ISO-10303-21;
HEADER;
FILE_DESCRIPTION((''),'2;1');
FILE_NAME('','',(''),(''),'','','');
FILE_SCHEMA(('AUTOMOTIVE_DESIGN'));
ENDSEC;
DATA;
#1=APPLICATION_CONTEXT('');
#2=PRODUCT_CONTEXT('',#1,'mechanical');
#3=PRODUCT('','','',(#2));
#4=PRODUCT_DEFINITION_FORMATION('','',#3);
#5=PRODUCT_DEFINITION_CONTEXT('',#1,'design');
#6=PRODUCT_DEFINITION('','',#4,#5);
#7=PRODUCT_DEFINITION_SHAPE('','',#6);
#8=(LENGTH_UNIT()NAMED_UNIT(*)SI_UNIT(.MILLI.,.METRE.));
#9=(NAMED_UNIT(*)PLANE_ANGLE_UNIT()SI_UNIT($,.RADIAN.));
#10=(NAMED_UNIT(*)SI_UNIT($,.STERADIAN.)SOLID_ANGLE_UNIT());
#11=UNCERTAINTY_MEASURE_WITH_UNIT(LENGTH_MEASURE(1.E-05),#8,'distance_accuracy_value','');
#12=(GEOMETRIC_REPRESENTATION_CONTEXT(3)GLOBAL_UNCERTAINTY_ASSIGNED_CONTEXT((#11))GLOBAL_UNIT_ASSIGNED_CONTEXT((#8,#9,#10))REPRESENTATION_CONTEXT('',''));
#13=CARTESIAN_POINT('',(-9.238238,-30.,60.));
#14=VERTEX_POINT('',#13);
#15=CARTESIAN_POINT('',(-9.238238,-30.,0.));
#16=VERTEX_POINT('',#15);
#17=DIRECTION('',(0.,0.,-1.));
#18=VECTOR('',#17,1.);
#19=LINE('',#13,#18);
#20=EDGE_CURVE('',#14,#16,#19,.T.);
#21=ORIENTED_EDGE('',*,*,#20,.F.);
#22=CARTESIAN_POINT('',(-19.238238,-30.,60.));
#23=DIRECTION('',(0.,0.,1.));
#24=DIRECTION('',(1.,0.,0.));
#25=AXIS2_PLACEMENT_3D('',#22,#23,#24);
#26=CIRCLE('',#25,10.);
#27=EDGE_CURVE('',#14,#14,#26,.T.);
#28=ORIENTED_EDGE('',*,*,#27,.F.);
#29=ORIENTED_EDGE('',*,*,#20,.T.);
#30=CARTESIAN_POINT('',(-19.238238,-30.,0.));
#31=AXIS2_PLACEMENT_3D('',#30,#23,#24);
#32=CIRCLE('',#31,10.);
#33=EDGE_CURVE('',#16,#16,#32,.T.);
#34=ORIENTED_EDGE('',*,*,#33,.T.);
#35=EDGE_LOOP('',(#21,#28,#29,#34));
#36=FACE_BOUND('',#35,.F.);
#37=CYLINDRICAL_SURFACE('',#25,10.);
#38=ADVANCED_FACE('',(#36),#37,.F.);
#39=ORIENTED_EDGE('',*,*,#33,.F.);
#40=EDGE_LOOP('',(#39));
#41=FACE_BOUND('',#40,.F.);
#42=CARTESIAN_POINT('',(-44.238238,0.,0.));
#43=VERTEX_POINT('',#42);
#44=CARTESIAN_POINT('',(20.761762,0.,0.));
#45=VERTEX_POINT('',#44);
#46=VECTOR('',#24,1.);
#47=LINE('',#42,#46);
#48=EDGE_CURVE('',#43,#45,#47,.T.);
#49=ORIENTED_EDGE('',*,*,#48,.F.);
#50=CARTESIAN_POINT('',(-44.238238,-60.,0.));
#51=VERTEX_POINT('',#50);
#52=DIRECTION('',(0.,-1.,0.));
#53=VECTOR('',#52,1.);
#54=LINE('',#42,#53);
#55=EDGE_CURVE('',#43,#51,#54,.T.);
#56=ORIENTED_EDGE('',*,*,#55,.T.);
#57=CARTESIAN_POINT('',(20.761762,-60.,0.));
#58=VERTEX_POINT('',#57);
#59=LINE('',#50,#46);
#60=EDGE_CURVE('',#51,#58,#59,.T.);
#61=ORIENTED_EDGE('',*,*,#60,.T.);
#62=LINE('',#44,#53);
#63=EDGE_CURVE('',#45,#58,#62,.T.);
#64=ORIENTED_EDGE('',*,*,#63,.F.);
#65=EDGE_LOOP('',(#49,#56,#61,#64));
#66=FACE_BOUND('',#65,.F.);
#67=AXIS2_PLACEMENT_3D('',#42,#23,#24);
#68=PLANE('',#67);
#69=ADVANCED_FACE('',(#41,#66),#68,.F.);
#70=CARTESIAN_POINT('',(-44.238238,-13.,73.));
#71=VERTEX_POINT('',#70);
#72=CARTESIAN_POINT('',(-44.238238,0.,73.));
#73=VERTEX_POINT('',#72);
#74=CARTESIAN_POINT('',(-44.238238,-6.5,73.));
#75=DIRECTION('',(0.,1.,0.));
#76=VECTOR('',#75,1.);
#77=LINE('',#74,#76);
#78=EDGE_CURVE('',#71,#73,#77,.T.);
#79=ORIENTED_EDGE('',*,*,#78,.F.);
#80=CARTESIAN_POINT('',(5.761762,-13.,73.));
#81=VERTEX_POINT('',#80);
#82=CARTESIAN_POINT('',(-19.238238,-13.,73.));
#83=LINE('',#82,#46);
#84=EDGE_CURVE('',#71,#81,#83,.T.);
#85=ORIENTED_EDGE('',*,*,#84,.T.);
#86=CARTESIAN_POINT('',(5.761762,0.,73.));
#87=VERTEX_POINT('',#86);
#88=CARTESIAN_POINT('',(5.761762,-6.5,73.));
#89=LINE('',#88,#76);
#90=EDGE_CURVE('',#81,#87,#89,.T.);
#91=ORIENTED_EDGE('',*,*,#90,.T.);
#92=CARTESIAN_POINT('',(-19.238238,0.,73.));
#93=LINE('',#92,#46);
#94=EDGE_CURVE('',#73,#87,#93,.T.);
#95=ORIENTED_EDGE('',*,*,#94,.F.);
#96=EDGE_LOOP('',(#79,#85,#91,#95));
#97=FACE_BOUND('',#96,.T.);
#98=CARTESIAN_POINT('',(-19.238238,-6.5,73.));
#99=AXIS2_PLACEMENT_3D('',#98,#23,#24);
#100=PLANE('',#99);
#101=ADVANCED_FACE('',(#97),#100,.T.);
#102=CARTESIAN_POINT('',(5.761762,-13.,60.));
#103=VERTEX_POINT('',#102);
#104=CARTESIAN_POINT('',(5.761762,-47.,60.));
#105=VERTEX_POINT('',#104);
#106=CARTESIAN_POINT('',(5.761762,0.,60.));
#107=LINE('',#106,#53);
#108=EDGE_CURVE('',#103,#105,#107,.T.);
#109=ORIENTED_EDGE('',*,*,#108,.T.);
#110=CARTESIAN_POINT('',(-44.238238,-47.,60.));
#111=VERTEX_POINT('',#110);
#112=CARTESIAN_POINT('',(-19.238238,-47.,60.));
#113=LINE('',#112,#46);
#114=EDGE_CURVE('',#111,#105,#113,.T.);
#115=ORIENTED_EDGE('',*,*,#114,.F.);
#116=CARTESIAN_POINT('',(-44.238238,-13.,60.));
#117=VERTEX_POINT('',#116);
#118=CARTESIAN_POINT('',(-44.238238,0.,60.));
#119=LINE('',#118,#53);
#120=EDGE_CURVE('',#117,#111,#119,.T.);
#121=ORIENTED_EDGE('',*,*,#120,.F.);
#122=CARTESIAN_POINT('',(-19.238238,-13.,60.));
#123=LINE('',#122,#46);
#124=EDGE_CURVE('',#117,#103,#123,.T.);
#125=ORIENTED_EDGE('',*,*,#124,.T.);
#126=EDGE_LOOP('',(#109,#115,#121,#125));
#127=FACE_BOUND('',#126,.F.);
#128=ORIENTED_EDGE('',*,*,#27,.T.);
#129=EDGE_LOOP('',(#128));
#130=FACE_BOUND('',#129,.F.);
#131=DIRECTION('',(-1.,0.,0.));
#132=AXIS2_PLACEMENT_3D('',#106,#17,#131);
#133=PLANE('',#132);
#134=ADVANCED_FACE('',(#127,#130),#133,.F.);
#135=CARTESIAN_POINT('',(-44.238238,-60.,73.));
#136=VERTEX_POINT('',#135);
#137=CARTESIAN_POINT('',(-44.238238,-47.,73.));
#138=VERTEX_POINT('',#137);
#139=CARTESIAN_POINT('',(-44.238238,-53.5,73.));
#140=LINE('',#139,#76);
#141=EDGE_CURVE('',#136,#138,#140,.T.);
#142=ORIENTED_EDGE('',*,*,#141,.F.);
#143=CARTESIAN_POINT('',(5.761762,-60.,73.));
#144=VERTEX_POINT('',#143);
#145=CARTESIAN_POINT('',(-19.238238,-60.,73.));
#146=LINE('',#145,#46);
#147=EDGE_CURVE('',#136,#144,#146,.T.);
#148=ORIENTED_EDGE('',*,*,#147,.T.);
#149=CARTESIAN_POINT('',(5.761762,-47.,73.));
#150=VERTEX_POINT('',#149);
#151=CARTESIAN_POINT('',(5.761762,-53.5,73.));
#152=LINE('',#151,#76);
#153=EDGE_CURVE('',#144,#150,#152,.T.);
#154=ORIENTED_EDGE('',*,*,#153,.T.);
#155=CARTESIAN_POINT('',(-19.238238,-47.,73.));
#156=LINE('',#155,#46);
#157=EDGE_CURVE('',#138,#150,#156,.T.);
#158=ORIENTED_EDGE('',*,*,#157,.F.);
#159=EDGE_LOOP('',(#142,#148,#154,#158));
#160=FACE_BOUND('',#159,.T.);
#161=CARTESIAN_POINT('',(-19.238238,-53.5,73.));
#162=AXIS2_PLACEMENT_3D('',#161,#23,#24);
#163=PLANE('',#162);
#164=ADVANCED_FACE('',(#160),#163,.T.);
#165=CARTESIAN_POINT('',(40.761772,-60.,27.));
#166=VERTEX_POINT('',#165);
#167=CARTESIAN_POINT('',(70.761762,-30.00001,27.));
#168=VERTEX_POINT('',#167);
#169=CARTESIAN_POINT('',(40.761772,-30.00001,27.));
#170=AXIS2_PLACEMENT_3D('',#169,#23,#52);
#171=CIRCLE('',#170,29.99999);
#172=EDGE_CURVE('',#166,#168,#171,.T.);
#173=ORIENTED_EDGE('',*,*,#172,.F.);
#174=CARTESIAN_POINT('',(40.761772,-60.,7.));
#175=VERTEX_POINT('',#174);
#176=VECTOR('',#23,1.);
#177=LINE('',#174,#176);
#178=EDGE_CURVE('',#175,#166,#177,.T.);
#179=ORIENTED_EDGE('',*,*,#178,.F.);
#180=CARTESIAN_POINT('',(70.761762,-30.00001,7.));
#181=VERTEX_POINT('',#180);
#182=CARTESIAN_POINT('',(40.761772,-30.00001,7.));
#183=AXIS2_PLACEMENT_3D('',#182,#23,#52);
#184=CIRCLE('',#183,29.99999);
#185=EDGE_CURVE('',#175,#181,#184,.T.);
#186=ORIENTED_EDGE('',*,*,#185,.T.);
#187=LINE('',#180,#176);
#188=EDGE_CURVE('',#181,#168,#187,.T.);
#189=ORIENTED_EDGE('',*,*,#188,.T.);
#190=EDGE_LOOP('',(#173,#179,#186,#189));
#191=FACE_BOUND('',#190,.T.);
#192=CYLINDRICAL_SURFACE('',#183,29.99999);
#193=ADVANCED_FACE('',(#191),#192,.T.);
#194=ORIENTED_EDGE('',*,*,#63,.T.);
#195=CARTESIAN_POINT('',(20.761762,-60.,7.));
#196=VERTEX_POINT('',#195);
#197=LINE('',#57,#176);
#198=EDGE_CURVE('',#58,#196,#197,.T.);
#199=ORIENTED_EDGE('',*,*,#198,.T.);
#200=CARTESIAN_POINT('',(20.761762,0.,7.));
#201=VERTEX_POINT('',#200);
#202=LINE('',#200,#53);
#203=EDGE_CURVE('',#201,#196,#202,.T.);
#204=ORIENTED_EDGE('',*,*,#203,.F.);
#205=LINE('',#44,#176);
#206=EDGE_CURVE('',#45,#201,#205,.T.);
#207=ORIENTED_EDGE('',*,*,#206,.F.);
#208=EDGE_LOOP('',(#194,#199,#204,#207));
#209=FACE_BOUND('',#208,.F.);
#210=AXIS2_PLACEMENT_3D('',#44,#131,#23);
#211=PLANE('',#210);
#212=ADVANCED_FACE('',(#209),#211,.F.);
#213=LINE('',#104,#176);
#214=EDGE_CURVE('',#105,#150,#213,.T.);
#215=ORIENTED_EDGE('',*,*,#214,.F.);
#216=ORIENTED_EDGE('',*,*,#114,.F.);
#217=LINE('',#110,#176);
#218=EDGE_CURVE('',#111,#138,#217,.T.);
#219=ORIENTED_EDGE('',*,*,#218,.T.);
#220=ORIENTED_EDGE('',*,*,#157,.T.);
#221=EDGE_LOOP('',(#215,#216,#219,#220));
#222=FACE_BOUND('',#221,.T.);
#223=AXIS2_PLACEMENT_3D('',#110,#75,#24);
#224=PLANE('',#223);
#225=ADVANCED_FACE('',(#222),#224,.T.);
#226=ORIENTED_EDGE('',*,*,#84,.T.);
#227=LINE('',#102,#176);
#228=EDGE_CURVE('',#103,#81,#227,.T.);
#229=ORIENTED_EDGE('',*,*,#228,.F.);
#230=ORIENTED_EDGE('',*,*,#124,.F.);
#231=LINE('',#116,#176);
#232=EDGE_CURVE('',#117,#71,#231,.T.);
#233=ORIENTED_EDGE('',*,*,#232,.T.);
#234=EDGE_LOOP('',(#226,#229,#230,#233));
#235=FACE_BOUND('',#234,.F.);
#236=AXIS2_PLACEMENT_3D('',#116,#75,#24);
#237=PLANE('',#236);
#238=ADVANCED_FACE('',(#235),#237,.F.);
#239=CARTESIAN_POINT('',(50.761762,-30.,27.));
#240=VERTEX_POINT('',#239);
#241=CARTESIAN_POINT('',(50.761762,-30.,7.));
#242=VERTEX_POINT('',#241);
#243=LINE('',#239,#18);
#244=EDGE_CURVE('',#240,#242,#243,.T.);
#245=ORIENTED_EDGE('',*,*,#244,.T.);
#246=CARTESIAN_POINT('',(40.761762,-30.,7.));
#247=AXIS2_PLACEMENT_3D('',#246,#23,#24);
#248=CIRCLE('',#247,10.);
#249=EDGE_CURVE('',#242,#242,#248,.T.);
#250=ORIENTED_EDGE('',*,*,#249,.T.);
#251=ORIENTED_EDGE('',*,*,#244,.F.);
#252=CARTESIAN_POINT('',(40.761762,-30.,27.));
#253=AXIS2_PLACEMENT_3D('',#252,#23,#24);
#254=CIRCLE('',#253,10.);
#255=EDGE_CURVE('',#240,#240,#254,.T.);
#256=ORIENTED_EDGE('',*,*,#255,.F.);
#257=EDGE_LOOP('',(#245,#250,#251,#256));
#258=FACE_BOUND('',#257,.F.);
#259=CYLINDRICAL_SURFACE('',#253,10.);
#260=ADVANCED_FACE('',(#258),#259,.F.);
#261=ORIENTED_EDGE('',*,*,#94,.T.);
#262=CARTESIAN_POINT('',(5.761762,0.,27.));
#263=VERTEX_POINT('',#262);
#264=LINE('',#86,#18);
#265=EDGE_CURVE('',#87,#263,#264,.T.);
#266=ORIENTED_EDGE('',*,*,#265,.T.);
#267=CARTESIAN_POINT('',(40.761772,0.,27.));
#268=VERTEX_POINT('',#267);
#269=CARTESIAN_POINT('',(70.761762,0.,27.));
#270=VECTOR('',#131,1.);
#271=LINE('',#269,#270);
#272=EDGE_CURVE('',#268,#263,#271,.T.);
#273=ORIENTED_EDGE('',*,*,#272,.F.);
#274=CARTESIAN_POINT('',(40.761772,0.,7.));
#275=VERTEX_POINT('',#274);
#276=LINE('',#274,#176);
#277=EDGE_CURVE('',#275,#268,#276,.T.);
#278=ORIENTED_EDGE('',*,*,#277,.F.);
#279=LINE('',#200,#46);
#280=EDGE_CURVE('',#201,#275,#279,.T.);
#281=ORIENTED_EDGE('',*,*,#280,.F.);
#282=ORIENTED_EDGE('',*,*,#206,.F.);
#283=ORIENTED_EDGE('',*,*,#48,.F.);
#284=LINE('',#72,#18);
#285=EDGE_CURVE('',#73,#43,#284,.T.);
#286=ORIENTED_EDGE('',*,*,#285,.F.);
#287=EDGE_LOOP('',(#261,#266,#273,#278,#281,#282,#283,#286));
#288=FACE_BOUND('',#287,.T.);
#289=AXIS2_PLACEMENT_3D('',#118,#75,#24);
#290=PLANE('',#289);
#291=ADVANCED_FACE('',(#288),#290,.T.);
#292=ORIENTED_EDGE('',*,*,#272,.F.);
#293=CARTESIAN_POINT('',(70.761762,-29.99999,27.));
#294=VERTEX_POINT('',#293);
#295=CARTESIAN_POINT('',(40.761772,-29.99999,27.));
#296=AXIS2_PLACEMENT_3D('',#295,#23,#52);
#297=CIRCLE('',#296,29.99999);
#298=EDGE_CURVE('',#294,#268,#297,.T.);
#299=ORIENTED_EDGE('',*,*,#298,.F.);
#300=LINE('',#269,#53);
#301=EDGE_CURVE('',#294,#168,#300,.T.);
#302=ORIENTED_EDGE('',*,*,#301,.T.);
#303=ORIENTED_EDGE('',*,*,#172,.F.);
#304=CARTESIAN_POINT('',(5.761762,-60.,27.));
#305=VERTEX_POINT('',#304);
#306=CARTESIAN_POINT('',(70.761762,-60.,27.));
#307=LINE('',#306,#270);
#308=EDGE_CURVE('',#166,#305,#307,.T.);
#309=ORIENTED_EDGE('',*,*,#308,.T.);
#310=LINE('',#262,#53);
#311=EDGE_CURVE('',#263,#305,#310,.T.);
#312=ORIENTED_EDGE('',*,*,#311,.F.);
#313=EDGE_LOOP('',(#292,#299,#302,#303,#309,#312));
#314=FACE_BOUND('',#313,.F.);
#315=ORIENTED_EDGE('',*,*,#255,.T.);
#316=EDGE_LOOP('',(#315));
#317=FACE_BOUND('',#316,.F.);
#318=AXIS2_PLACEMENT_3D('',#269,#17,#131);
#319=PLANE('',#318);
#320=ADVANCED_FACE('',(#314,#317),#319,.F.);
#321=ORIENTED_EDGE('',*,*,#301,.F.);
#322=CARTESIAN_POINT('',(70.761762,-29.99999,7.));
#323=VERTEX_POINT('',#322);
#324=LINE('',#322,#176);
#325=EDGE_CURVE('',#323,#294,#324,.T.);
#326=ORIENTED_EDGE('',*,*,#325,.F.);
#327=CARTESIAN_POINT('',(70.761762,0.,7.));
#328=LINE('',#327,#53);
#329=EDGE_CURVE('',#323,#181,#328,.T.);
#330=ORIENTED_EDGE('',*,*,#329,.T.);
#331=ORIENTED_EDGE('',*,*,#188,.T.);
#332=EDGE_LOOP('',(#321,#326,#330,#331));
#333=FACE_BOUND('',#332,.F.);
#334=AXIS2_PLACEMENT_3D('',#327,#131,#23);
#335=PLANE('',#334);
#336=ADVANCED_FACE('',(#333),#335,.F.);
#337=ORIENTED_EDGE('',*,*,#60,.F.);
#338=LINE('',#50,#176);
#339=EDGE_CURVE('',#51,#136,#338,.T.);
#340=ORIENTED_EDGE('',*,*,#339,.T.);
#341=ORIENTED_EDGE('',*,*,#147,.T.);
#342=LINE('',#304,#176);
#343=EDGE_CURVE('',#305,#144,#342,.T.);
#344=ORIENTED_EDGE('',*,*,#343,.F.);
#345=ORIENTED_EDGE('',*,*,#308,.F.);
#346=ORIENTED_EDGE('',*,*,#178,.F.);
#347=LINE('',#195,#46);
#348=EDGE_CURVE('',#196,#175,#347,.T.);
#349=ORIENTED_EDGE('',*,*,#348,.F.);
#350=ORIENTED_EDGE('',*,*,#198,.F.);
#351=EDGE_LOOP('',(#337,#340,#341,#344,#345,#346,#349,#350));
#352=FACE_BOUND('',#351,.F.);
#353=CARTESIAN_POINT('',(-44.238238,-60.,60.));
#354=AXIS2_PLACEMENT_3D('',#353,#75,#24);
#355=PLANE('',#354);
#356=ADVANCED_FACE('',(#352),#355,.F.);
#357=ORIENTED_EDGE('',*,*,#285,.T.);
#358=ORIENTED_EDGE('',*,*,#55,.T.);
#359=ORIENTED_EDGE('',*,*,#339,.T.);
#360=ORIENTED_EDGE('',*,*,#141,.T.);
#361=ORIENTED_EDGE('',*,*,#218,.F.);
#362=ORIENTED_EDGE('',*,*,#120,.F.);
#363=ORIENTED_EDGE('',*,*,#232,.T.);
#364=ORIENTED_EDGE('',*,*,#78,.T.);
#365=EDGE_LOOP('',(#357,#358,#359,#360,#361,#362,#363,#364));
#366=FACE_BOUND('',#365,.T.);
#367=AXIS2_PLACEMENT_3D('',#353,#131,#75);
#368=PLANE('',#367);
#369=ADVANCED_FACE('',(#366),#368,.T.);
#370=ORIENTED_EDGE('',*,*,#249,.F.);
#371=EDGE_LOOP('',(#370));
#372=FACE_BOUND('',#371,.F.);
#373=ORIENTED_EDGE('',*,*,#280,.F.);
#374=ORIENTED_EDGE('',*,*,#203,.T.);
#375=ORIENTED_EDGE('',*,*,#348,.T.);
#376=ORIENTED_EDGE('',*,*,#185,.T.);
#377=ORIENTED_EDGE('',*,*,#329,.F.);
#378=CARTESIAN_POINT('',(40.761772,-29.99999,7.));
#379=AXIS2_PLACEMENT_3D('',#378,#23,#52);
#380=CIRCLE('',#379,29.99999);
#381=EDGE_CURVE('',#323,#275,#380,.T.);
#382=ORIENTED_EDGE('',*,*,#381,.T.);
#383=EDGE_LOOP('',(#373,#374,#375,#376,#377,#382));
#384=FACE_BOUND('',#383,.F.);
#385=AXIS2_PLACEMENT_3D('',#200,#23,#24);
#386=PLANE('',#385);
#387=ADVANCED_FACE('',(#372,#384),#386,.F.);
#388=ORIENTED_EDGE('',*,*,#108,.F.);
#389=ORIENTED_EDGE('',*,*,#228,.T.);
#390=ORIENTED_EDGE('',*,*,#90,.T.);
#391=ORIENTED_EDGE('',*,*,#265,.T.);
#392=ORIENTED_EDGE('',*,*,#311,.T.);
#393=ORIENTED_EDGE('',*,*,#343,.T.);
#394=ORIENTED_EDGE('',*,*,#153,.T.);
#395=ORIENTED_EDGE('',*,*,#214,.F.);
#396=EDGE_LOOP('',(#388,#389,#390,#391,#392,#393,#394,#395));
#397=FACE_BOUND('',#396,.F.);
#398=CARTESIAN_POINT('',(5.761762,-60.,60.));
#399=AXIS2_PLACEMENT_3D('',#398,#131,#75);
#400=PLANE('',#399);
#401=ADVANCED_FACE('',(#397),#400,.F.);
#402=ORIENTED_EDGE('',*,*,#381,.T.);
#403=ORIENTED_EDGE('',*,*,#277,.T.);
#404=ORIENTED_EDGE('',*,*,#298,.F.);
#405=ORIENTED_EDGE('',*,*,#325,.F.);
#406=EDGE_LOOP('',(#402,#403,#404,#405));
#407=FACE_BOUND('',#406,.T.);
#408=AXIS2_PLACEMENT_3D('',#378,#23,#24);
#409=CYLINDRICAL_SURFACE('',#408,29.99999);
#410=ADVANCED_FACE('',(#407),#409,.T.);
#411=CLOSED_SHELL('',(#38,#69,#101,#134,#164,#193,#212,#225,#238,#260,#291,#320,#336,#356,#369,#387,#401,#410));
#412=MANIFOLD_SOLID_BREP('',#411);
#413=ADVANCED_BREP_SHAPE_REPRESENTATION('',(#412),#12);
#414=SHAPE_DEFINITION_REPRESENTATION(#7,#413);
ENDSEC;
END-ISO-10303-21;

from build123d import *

# Parameters (mm, degrees)
F1_DEPTH  = 60
F2_W      = 50
F2_H      = 13
F3_DEPTH  = 13
F4_W      = 50
F4_H      = 13
F5_DEPTH  = 13
F6_R      = 29.99999
F7_R      = 10
F9_DEPTH  = 20
F8_R      = 10
F10_DEPTH = 60


# Not quite as in the source:
# - a fillet or chamfer is up to 0.001 mm smaller than in the source, because OpenCascade refuses the exact size


with BuildPart() as f1:
    # F0 (on Front) → F1 (new body)
    with BuildSketch(Plane.XZ):
        Polygon((-44.2382382879, 60), (-44.2382382879, 0), (20.7617617121, 0), (20.7617617121, 7), (70.7617617121, 7), (70.7617617121, 27), (5.7617617121, 27), (5.7617617121, 60), align=None)
    extrude(amount=F1_DEPTH)

    # F2 (on face) → F3 (join)
    with BuildSketch(Plane.XY.offset(60)):
        with Locations((-19.2382382879, -6.5)):
            Rectangle(F2_W, F2_H)
    extrude(amount=F3_DEPTH)

    # F4 (on face) → F5 (join)
    with BuildSketch(Plane.XY.offset(60)):
        with Locations((-19.2382382879, -53.5)):
            Rectangle(F4_W, F4_H)
    extrude(amount=F5_DEPTH)

    # F6 (radius 30 in the source; OpenCascade refuses exactly that, so slightly less here)
    f6_edges = [f1.edges().sort_by_distance(p)[0] for p in [
        (70.761762, -60, 17),
        (70.761762, 0, 17),
    ]]
    fillet(f6_edges, radius=F6_R)

    # F7 (on face) → F9 (cut)
    with BuildSketch(Plane.XY.offset(27)):
        with Locations((40.7617617121, -30)):
            Circle(F7_R)
    extrude(amount=-F9_DEPTH, mode=Mode.SUBTRACT)

    # F8 (on face) → F10 (cut)
    with BuildSketch(Plane.XY.offset(60)):
        with Locations((-19.2382382879, -30)):
            Circle(F8_R)
    extrude(amount=-F10_DEPTH, mode=Mode.SUBTRACT)


solid = f1.part
